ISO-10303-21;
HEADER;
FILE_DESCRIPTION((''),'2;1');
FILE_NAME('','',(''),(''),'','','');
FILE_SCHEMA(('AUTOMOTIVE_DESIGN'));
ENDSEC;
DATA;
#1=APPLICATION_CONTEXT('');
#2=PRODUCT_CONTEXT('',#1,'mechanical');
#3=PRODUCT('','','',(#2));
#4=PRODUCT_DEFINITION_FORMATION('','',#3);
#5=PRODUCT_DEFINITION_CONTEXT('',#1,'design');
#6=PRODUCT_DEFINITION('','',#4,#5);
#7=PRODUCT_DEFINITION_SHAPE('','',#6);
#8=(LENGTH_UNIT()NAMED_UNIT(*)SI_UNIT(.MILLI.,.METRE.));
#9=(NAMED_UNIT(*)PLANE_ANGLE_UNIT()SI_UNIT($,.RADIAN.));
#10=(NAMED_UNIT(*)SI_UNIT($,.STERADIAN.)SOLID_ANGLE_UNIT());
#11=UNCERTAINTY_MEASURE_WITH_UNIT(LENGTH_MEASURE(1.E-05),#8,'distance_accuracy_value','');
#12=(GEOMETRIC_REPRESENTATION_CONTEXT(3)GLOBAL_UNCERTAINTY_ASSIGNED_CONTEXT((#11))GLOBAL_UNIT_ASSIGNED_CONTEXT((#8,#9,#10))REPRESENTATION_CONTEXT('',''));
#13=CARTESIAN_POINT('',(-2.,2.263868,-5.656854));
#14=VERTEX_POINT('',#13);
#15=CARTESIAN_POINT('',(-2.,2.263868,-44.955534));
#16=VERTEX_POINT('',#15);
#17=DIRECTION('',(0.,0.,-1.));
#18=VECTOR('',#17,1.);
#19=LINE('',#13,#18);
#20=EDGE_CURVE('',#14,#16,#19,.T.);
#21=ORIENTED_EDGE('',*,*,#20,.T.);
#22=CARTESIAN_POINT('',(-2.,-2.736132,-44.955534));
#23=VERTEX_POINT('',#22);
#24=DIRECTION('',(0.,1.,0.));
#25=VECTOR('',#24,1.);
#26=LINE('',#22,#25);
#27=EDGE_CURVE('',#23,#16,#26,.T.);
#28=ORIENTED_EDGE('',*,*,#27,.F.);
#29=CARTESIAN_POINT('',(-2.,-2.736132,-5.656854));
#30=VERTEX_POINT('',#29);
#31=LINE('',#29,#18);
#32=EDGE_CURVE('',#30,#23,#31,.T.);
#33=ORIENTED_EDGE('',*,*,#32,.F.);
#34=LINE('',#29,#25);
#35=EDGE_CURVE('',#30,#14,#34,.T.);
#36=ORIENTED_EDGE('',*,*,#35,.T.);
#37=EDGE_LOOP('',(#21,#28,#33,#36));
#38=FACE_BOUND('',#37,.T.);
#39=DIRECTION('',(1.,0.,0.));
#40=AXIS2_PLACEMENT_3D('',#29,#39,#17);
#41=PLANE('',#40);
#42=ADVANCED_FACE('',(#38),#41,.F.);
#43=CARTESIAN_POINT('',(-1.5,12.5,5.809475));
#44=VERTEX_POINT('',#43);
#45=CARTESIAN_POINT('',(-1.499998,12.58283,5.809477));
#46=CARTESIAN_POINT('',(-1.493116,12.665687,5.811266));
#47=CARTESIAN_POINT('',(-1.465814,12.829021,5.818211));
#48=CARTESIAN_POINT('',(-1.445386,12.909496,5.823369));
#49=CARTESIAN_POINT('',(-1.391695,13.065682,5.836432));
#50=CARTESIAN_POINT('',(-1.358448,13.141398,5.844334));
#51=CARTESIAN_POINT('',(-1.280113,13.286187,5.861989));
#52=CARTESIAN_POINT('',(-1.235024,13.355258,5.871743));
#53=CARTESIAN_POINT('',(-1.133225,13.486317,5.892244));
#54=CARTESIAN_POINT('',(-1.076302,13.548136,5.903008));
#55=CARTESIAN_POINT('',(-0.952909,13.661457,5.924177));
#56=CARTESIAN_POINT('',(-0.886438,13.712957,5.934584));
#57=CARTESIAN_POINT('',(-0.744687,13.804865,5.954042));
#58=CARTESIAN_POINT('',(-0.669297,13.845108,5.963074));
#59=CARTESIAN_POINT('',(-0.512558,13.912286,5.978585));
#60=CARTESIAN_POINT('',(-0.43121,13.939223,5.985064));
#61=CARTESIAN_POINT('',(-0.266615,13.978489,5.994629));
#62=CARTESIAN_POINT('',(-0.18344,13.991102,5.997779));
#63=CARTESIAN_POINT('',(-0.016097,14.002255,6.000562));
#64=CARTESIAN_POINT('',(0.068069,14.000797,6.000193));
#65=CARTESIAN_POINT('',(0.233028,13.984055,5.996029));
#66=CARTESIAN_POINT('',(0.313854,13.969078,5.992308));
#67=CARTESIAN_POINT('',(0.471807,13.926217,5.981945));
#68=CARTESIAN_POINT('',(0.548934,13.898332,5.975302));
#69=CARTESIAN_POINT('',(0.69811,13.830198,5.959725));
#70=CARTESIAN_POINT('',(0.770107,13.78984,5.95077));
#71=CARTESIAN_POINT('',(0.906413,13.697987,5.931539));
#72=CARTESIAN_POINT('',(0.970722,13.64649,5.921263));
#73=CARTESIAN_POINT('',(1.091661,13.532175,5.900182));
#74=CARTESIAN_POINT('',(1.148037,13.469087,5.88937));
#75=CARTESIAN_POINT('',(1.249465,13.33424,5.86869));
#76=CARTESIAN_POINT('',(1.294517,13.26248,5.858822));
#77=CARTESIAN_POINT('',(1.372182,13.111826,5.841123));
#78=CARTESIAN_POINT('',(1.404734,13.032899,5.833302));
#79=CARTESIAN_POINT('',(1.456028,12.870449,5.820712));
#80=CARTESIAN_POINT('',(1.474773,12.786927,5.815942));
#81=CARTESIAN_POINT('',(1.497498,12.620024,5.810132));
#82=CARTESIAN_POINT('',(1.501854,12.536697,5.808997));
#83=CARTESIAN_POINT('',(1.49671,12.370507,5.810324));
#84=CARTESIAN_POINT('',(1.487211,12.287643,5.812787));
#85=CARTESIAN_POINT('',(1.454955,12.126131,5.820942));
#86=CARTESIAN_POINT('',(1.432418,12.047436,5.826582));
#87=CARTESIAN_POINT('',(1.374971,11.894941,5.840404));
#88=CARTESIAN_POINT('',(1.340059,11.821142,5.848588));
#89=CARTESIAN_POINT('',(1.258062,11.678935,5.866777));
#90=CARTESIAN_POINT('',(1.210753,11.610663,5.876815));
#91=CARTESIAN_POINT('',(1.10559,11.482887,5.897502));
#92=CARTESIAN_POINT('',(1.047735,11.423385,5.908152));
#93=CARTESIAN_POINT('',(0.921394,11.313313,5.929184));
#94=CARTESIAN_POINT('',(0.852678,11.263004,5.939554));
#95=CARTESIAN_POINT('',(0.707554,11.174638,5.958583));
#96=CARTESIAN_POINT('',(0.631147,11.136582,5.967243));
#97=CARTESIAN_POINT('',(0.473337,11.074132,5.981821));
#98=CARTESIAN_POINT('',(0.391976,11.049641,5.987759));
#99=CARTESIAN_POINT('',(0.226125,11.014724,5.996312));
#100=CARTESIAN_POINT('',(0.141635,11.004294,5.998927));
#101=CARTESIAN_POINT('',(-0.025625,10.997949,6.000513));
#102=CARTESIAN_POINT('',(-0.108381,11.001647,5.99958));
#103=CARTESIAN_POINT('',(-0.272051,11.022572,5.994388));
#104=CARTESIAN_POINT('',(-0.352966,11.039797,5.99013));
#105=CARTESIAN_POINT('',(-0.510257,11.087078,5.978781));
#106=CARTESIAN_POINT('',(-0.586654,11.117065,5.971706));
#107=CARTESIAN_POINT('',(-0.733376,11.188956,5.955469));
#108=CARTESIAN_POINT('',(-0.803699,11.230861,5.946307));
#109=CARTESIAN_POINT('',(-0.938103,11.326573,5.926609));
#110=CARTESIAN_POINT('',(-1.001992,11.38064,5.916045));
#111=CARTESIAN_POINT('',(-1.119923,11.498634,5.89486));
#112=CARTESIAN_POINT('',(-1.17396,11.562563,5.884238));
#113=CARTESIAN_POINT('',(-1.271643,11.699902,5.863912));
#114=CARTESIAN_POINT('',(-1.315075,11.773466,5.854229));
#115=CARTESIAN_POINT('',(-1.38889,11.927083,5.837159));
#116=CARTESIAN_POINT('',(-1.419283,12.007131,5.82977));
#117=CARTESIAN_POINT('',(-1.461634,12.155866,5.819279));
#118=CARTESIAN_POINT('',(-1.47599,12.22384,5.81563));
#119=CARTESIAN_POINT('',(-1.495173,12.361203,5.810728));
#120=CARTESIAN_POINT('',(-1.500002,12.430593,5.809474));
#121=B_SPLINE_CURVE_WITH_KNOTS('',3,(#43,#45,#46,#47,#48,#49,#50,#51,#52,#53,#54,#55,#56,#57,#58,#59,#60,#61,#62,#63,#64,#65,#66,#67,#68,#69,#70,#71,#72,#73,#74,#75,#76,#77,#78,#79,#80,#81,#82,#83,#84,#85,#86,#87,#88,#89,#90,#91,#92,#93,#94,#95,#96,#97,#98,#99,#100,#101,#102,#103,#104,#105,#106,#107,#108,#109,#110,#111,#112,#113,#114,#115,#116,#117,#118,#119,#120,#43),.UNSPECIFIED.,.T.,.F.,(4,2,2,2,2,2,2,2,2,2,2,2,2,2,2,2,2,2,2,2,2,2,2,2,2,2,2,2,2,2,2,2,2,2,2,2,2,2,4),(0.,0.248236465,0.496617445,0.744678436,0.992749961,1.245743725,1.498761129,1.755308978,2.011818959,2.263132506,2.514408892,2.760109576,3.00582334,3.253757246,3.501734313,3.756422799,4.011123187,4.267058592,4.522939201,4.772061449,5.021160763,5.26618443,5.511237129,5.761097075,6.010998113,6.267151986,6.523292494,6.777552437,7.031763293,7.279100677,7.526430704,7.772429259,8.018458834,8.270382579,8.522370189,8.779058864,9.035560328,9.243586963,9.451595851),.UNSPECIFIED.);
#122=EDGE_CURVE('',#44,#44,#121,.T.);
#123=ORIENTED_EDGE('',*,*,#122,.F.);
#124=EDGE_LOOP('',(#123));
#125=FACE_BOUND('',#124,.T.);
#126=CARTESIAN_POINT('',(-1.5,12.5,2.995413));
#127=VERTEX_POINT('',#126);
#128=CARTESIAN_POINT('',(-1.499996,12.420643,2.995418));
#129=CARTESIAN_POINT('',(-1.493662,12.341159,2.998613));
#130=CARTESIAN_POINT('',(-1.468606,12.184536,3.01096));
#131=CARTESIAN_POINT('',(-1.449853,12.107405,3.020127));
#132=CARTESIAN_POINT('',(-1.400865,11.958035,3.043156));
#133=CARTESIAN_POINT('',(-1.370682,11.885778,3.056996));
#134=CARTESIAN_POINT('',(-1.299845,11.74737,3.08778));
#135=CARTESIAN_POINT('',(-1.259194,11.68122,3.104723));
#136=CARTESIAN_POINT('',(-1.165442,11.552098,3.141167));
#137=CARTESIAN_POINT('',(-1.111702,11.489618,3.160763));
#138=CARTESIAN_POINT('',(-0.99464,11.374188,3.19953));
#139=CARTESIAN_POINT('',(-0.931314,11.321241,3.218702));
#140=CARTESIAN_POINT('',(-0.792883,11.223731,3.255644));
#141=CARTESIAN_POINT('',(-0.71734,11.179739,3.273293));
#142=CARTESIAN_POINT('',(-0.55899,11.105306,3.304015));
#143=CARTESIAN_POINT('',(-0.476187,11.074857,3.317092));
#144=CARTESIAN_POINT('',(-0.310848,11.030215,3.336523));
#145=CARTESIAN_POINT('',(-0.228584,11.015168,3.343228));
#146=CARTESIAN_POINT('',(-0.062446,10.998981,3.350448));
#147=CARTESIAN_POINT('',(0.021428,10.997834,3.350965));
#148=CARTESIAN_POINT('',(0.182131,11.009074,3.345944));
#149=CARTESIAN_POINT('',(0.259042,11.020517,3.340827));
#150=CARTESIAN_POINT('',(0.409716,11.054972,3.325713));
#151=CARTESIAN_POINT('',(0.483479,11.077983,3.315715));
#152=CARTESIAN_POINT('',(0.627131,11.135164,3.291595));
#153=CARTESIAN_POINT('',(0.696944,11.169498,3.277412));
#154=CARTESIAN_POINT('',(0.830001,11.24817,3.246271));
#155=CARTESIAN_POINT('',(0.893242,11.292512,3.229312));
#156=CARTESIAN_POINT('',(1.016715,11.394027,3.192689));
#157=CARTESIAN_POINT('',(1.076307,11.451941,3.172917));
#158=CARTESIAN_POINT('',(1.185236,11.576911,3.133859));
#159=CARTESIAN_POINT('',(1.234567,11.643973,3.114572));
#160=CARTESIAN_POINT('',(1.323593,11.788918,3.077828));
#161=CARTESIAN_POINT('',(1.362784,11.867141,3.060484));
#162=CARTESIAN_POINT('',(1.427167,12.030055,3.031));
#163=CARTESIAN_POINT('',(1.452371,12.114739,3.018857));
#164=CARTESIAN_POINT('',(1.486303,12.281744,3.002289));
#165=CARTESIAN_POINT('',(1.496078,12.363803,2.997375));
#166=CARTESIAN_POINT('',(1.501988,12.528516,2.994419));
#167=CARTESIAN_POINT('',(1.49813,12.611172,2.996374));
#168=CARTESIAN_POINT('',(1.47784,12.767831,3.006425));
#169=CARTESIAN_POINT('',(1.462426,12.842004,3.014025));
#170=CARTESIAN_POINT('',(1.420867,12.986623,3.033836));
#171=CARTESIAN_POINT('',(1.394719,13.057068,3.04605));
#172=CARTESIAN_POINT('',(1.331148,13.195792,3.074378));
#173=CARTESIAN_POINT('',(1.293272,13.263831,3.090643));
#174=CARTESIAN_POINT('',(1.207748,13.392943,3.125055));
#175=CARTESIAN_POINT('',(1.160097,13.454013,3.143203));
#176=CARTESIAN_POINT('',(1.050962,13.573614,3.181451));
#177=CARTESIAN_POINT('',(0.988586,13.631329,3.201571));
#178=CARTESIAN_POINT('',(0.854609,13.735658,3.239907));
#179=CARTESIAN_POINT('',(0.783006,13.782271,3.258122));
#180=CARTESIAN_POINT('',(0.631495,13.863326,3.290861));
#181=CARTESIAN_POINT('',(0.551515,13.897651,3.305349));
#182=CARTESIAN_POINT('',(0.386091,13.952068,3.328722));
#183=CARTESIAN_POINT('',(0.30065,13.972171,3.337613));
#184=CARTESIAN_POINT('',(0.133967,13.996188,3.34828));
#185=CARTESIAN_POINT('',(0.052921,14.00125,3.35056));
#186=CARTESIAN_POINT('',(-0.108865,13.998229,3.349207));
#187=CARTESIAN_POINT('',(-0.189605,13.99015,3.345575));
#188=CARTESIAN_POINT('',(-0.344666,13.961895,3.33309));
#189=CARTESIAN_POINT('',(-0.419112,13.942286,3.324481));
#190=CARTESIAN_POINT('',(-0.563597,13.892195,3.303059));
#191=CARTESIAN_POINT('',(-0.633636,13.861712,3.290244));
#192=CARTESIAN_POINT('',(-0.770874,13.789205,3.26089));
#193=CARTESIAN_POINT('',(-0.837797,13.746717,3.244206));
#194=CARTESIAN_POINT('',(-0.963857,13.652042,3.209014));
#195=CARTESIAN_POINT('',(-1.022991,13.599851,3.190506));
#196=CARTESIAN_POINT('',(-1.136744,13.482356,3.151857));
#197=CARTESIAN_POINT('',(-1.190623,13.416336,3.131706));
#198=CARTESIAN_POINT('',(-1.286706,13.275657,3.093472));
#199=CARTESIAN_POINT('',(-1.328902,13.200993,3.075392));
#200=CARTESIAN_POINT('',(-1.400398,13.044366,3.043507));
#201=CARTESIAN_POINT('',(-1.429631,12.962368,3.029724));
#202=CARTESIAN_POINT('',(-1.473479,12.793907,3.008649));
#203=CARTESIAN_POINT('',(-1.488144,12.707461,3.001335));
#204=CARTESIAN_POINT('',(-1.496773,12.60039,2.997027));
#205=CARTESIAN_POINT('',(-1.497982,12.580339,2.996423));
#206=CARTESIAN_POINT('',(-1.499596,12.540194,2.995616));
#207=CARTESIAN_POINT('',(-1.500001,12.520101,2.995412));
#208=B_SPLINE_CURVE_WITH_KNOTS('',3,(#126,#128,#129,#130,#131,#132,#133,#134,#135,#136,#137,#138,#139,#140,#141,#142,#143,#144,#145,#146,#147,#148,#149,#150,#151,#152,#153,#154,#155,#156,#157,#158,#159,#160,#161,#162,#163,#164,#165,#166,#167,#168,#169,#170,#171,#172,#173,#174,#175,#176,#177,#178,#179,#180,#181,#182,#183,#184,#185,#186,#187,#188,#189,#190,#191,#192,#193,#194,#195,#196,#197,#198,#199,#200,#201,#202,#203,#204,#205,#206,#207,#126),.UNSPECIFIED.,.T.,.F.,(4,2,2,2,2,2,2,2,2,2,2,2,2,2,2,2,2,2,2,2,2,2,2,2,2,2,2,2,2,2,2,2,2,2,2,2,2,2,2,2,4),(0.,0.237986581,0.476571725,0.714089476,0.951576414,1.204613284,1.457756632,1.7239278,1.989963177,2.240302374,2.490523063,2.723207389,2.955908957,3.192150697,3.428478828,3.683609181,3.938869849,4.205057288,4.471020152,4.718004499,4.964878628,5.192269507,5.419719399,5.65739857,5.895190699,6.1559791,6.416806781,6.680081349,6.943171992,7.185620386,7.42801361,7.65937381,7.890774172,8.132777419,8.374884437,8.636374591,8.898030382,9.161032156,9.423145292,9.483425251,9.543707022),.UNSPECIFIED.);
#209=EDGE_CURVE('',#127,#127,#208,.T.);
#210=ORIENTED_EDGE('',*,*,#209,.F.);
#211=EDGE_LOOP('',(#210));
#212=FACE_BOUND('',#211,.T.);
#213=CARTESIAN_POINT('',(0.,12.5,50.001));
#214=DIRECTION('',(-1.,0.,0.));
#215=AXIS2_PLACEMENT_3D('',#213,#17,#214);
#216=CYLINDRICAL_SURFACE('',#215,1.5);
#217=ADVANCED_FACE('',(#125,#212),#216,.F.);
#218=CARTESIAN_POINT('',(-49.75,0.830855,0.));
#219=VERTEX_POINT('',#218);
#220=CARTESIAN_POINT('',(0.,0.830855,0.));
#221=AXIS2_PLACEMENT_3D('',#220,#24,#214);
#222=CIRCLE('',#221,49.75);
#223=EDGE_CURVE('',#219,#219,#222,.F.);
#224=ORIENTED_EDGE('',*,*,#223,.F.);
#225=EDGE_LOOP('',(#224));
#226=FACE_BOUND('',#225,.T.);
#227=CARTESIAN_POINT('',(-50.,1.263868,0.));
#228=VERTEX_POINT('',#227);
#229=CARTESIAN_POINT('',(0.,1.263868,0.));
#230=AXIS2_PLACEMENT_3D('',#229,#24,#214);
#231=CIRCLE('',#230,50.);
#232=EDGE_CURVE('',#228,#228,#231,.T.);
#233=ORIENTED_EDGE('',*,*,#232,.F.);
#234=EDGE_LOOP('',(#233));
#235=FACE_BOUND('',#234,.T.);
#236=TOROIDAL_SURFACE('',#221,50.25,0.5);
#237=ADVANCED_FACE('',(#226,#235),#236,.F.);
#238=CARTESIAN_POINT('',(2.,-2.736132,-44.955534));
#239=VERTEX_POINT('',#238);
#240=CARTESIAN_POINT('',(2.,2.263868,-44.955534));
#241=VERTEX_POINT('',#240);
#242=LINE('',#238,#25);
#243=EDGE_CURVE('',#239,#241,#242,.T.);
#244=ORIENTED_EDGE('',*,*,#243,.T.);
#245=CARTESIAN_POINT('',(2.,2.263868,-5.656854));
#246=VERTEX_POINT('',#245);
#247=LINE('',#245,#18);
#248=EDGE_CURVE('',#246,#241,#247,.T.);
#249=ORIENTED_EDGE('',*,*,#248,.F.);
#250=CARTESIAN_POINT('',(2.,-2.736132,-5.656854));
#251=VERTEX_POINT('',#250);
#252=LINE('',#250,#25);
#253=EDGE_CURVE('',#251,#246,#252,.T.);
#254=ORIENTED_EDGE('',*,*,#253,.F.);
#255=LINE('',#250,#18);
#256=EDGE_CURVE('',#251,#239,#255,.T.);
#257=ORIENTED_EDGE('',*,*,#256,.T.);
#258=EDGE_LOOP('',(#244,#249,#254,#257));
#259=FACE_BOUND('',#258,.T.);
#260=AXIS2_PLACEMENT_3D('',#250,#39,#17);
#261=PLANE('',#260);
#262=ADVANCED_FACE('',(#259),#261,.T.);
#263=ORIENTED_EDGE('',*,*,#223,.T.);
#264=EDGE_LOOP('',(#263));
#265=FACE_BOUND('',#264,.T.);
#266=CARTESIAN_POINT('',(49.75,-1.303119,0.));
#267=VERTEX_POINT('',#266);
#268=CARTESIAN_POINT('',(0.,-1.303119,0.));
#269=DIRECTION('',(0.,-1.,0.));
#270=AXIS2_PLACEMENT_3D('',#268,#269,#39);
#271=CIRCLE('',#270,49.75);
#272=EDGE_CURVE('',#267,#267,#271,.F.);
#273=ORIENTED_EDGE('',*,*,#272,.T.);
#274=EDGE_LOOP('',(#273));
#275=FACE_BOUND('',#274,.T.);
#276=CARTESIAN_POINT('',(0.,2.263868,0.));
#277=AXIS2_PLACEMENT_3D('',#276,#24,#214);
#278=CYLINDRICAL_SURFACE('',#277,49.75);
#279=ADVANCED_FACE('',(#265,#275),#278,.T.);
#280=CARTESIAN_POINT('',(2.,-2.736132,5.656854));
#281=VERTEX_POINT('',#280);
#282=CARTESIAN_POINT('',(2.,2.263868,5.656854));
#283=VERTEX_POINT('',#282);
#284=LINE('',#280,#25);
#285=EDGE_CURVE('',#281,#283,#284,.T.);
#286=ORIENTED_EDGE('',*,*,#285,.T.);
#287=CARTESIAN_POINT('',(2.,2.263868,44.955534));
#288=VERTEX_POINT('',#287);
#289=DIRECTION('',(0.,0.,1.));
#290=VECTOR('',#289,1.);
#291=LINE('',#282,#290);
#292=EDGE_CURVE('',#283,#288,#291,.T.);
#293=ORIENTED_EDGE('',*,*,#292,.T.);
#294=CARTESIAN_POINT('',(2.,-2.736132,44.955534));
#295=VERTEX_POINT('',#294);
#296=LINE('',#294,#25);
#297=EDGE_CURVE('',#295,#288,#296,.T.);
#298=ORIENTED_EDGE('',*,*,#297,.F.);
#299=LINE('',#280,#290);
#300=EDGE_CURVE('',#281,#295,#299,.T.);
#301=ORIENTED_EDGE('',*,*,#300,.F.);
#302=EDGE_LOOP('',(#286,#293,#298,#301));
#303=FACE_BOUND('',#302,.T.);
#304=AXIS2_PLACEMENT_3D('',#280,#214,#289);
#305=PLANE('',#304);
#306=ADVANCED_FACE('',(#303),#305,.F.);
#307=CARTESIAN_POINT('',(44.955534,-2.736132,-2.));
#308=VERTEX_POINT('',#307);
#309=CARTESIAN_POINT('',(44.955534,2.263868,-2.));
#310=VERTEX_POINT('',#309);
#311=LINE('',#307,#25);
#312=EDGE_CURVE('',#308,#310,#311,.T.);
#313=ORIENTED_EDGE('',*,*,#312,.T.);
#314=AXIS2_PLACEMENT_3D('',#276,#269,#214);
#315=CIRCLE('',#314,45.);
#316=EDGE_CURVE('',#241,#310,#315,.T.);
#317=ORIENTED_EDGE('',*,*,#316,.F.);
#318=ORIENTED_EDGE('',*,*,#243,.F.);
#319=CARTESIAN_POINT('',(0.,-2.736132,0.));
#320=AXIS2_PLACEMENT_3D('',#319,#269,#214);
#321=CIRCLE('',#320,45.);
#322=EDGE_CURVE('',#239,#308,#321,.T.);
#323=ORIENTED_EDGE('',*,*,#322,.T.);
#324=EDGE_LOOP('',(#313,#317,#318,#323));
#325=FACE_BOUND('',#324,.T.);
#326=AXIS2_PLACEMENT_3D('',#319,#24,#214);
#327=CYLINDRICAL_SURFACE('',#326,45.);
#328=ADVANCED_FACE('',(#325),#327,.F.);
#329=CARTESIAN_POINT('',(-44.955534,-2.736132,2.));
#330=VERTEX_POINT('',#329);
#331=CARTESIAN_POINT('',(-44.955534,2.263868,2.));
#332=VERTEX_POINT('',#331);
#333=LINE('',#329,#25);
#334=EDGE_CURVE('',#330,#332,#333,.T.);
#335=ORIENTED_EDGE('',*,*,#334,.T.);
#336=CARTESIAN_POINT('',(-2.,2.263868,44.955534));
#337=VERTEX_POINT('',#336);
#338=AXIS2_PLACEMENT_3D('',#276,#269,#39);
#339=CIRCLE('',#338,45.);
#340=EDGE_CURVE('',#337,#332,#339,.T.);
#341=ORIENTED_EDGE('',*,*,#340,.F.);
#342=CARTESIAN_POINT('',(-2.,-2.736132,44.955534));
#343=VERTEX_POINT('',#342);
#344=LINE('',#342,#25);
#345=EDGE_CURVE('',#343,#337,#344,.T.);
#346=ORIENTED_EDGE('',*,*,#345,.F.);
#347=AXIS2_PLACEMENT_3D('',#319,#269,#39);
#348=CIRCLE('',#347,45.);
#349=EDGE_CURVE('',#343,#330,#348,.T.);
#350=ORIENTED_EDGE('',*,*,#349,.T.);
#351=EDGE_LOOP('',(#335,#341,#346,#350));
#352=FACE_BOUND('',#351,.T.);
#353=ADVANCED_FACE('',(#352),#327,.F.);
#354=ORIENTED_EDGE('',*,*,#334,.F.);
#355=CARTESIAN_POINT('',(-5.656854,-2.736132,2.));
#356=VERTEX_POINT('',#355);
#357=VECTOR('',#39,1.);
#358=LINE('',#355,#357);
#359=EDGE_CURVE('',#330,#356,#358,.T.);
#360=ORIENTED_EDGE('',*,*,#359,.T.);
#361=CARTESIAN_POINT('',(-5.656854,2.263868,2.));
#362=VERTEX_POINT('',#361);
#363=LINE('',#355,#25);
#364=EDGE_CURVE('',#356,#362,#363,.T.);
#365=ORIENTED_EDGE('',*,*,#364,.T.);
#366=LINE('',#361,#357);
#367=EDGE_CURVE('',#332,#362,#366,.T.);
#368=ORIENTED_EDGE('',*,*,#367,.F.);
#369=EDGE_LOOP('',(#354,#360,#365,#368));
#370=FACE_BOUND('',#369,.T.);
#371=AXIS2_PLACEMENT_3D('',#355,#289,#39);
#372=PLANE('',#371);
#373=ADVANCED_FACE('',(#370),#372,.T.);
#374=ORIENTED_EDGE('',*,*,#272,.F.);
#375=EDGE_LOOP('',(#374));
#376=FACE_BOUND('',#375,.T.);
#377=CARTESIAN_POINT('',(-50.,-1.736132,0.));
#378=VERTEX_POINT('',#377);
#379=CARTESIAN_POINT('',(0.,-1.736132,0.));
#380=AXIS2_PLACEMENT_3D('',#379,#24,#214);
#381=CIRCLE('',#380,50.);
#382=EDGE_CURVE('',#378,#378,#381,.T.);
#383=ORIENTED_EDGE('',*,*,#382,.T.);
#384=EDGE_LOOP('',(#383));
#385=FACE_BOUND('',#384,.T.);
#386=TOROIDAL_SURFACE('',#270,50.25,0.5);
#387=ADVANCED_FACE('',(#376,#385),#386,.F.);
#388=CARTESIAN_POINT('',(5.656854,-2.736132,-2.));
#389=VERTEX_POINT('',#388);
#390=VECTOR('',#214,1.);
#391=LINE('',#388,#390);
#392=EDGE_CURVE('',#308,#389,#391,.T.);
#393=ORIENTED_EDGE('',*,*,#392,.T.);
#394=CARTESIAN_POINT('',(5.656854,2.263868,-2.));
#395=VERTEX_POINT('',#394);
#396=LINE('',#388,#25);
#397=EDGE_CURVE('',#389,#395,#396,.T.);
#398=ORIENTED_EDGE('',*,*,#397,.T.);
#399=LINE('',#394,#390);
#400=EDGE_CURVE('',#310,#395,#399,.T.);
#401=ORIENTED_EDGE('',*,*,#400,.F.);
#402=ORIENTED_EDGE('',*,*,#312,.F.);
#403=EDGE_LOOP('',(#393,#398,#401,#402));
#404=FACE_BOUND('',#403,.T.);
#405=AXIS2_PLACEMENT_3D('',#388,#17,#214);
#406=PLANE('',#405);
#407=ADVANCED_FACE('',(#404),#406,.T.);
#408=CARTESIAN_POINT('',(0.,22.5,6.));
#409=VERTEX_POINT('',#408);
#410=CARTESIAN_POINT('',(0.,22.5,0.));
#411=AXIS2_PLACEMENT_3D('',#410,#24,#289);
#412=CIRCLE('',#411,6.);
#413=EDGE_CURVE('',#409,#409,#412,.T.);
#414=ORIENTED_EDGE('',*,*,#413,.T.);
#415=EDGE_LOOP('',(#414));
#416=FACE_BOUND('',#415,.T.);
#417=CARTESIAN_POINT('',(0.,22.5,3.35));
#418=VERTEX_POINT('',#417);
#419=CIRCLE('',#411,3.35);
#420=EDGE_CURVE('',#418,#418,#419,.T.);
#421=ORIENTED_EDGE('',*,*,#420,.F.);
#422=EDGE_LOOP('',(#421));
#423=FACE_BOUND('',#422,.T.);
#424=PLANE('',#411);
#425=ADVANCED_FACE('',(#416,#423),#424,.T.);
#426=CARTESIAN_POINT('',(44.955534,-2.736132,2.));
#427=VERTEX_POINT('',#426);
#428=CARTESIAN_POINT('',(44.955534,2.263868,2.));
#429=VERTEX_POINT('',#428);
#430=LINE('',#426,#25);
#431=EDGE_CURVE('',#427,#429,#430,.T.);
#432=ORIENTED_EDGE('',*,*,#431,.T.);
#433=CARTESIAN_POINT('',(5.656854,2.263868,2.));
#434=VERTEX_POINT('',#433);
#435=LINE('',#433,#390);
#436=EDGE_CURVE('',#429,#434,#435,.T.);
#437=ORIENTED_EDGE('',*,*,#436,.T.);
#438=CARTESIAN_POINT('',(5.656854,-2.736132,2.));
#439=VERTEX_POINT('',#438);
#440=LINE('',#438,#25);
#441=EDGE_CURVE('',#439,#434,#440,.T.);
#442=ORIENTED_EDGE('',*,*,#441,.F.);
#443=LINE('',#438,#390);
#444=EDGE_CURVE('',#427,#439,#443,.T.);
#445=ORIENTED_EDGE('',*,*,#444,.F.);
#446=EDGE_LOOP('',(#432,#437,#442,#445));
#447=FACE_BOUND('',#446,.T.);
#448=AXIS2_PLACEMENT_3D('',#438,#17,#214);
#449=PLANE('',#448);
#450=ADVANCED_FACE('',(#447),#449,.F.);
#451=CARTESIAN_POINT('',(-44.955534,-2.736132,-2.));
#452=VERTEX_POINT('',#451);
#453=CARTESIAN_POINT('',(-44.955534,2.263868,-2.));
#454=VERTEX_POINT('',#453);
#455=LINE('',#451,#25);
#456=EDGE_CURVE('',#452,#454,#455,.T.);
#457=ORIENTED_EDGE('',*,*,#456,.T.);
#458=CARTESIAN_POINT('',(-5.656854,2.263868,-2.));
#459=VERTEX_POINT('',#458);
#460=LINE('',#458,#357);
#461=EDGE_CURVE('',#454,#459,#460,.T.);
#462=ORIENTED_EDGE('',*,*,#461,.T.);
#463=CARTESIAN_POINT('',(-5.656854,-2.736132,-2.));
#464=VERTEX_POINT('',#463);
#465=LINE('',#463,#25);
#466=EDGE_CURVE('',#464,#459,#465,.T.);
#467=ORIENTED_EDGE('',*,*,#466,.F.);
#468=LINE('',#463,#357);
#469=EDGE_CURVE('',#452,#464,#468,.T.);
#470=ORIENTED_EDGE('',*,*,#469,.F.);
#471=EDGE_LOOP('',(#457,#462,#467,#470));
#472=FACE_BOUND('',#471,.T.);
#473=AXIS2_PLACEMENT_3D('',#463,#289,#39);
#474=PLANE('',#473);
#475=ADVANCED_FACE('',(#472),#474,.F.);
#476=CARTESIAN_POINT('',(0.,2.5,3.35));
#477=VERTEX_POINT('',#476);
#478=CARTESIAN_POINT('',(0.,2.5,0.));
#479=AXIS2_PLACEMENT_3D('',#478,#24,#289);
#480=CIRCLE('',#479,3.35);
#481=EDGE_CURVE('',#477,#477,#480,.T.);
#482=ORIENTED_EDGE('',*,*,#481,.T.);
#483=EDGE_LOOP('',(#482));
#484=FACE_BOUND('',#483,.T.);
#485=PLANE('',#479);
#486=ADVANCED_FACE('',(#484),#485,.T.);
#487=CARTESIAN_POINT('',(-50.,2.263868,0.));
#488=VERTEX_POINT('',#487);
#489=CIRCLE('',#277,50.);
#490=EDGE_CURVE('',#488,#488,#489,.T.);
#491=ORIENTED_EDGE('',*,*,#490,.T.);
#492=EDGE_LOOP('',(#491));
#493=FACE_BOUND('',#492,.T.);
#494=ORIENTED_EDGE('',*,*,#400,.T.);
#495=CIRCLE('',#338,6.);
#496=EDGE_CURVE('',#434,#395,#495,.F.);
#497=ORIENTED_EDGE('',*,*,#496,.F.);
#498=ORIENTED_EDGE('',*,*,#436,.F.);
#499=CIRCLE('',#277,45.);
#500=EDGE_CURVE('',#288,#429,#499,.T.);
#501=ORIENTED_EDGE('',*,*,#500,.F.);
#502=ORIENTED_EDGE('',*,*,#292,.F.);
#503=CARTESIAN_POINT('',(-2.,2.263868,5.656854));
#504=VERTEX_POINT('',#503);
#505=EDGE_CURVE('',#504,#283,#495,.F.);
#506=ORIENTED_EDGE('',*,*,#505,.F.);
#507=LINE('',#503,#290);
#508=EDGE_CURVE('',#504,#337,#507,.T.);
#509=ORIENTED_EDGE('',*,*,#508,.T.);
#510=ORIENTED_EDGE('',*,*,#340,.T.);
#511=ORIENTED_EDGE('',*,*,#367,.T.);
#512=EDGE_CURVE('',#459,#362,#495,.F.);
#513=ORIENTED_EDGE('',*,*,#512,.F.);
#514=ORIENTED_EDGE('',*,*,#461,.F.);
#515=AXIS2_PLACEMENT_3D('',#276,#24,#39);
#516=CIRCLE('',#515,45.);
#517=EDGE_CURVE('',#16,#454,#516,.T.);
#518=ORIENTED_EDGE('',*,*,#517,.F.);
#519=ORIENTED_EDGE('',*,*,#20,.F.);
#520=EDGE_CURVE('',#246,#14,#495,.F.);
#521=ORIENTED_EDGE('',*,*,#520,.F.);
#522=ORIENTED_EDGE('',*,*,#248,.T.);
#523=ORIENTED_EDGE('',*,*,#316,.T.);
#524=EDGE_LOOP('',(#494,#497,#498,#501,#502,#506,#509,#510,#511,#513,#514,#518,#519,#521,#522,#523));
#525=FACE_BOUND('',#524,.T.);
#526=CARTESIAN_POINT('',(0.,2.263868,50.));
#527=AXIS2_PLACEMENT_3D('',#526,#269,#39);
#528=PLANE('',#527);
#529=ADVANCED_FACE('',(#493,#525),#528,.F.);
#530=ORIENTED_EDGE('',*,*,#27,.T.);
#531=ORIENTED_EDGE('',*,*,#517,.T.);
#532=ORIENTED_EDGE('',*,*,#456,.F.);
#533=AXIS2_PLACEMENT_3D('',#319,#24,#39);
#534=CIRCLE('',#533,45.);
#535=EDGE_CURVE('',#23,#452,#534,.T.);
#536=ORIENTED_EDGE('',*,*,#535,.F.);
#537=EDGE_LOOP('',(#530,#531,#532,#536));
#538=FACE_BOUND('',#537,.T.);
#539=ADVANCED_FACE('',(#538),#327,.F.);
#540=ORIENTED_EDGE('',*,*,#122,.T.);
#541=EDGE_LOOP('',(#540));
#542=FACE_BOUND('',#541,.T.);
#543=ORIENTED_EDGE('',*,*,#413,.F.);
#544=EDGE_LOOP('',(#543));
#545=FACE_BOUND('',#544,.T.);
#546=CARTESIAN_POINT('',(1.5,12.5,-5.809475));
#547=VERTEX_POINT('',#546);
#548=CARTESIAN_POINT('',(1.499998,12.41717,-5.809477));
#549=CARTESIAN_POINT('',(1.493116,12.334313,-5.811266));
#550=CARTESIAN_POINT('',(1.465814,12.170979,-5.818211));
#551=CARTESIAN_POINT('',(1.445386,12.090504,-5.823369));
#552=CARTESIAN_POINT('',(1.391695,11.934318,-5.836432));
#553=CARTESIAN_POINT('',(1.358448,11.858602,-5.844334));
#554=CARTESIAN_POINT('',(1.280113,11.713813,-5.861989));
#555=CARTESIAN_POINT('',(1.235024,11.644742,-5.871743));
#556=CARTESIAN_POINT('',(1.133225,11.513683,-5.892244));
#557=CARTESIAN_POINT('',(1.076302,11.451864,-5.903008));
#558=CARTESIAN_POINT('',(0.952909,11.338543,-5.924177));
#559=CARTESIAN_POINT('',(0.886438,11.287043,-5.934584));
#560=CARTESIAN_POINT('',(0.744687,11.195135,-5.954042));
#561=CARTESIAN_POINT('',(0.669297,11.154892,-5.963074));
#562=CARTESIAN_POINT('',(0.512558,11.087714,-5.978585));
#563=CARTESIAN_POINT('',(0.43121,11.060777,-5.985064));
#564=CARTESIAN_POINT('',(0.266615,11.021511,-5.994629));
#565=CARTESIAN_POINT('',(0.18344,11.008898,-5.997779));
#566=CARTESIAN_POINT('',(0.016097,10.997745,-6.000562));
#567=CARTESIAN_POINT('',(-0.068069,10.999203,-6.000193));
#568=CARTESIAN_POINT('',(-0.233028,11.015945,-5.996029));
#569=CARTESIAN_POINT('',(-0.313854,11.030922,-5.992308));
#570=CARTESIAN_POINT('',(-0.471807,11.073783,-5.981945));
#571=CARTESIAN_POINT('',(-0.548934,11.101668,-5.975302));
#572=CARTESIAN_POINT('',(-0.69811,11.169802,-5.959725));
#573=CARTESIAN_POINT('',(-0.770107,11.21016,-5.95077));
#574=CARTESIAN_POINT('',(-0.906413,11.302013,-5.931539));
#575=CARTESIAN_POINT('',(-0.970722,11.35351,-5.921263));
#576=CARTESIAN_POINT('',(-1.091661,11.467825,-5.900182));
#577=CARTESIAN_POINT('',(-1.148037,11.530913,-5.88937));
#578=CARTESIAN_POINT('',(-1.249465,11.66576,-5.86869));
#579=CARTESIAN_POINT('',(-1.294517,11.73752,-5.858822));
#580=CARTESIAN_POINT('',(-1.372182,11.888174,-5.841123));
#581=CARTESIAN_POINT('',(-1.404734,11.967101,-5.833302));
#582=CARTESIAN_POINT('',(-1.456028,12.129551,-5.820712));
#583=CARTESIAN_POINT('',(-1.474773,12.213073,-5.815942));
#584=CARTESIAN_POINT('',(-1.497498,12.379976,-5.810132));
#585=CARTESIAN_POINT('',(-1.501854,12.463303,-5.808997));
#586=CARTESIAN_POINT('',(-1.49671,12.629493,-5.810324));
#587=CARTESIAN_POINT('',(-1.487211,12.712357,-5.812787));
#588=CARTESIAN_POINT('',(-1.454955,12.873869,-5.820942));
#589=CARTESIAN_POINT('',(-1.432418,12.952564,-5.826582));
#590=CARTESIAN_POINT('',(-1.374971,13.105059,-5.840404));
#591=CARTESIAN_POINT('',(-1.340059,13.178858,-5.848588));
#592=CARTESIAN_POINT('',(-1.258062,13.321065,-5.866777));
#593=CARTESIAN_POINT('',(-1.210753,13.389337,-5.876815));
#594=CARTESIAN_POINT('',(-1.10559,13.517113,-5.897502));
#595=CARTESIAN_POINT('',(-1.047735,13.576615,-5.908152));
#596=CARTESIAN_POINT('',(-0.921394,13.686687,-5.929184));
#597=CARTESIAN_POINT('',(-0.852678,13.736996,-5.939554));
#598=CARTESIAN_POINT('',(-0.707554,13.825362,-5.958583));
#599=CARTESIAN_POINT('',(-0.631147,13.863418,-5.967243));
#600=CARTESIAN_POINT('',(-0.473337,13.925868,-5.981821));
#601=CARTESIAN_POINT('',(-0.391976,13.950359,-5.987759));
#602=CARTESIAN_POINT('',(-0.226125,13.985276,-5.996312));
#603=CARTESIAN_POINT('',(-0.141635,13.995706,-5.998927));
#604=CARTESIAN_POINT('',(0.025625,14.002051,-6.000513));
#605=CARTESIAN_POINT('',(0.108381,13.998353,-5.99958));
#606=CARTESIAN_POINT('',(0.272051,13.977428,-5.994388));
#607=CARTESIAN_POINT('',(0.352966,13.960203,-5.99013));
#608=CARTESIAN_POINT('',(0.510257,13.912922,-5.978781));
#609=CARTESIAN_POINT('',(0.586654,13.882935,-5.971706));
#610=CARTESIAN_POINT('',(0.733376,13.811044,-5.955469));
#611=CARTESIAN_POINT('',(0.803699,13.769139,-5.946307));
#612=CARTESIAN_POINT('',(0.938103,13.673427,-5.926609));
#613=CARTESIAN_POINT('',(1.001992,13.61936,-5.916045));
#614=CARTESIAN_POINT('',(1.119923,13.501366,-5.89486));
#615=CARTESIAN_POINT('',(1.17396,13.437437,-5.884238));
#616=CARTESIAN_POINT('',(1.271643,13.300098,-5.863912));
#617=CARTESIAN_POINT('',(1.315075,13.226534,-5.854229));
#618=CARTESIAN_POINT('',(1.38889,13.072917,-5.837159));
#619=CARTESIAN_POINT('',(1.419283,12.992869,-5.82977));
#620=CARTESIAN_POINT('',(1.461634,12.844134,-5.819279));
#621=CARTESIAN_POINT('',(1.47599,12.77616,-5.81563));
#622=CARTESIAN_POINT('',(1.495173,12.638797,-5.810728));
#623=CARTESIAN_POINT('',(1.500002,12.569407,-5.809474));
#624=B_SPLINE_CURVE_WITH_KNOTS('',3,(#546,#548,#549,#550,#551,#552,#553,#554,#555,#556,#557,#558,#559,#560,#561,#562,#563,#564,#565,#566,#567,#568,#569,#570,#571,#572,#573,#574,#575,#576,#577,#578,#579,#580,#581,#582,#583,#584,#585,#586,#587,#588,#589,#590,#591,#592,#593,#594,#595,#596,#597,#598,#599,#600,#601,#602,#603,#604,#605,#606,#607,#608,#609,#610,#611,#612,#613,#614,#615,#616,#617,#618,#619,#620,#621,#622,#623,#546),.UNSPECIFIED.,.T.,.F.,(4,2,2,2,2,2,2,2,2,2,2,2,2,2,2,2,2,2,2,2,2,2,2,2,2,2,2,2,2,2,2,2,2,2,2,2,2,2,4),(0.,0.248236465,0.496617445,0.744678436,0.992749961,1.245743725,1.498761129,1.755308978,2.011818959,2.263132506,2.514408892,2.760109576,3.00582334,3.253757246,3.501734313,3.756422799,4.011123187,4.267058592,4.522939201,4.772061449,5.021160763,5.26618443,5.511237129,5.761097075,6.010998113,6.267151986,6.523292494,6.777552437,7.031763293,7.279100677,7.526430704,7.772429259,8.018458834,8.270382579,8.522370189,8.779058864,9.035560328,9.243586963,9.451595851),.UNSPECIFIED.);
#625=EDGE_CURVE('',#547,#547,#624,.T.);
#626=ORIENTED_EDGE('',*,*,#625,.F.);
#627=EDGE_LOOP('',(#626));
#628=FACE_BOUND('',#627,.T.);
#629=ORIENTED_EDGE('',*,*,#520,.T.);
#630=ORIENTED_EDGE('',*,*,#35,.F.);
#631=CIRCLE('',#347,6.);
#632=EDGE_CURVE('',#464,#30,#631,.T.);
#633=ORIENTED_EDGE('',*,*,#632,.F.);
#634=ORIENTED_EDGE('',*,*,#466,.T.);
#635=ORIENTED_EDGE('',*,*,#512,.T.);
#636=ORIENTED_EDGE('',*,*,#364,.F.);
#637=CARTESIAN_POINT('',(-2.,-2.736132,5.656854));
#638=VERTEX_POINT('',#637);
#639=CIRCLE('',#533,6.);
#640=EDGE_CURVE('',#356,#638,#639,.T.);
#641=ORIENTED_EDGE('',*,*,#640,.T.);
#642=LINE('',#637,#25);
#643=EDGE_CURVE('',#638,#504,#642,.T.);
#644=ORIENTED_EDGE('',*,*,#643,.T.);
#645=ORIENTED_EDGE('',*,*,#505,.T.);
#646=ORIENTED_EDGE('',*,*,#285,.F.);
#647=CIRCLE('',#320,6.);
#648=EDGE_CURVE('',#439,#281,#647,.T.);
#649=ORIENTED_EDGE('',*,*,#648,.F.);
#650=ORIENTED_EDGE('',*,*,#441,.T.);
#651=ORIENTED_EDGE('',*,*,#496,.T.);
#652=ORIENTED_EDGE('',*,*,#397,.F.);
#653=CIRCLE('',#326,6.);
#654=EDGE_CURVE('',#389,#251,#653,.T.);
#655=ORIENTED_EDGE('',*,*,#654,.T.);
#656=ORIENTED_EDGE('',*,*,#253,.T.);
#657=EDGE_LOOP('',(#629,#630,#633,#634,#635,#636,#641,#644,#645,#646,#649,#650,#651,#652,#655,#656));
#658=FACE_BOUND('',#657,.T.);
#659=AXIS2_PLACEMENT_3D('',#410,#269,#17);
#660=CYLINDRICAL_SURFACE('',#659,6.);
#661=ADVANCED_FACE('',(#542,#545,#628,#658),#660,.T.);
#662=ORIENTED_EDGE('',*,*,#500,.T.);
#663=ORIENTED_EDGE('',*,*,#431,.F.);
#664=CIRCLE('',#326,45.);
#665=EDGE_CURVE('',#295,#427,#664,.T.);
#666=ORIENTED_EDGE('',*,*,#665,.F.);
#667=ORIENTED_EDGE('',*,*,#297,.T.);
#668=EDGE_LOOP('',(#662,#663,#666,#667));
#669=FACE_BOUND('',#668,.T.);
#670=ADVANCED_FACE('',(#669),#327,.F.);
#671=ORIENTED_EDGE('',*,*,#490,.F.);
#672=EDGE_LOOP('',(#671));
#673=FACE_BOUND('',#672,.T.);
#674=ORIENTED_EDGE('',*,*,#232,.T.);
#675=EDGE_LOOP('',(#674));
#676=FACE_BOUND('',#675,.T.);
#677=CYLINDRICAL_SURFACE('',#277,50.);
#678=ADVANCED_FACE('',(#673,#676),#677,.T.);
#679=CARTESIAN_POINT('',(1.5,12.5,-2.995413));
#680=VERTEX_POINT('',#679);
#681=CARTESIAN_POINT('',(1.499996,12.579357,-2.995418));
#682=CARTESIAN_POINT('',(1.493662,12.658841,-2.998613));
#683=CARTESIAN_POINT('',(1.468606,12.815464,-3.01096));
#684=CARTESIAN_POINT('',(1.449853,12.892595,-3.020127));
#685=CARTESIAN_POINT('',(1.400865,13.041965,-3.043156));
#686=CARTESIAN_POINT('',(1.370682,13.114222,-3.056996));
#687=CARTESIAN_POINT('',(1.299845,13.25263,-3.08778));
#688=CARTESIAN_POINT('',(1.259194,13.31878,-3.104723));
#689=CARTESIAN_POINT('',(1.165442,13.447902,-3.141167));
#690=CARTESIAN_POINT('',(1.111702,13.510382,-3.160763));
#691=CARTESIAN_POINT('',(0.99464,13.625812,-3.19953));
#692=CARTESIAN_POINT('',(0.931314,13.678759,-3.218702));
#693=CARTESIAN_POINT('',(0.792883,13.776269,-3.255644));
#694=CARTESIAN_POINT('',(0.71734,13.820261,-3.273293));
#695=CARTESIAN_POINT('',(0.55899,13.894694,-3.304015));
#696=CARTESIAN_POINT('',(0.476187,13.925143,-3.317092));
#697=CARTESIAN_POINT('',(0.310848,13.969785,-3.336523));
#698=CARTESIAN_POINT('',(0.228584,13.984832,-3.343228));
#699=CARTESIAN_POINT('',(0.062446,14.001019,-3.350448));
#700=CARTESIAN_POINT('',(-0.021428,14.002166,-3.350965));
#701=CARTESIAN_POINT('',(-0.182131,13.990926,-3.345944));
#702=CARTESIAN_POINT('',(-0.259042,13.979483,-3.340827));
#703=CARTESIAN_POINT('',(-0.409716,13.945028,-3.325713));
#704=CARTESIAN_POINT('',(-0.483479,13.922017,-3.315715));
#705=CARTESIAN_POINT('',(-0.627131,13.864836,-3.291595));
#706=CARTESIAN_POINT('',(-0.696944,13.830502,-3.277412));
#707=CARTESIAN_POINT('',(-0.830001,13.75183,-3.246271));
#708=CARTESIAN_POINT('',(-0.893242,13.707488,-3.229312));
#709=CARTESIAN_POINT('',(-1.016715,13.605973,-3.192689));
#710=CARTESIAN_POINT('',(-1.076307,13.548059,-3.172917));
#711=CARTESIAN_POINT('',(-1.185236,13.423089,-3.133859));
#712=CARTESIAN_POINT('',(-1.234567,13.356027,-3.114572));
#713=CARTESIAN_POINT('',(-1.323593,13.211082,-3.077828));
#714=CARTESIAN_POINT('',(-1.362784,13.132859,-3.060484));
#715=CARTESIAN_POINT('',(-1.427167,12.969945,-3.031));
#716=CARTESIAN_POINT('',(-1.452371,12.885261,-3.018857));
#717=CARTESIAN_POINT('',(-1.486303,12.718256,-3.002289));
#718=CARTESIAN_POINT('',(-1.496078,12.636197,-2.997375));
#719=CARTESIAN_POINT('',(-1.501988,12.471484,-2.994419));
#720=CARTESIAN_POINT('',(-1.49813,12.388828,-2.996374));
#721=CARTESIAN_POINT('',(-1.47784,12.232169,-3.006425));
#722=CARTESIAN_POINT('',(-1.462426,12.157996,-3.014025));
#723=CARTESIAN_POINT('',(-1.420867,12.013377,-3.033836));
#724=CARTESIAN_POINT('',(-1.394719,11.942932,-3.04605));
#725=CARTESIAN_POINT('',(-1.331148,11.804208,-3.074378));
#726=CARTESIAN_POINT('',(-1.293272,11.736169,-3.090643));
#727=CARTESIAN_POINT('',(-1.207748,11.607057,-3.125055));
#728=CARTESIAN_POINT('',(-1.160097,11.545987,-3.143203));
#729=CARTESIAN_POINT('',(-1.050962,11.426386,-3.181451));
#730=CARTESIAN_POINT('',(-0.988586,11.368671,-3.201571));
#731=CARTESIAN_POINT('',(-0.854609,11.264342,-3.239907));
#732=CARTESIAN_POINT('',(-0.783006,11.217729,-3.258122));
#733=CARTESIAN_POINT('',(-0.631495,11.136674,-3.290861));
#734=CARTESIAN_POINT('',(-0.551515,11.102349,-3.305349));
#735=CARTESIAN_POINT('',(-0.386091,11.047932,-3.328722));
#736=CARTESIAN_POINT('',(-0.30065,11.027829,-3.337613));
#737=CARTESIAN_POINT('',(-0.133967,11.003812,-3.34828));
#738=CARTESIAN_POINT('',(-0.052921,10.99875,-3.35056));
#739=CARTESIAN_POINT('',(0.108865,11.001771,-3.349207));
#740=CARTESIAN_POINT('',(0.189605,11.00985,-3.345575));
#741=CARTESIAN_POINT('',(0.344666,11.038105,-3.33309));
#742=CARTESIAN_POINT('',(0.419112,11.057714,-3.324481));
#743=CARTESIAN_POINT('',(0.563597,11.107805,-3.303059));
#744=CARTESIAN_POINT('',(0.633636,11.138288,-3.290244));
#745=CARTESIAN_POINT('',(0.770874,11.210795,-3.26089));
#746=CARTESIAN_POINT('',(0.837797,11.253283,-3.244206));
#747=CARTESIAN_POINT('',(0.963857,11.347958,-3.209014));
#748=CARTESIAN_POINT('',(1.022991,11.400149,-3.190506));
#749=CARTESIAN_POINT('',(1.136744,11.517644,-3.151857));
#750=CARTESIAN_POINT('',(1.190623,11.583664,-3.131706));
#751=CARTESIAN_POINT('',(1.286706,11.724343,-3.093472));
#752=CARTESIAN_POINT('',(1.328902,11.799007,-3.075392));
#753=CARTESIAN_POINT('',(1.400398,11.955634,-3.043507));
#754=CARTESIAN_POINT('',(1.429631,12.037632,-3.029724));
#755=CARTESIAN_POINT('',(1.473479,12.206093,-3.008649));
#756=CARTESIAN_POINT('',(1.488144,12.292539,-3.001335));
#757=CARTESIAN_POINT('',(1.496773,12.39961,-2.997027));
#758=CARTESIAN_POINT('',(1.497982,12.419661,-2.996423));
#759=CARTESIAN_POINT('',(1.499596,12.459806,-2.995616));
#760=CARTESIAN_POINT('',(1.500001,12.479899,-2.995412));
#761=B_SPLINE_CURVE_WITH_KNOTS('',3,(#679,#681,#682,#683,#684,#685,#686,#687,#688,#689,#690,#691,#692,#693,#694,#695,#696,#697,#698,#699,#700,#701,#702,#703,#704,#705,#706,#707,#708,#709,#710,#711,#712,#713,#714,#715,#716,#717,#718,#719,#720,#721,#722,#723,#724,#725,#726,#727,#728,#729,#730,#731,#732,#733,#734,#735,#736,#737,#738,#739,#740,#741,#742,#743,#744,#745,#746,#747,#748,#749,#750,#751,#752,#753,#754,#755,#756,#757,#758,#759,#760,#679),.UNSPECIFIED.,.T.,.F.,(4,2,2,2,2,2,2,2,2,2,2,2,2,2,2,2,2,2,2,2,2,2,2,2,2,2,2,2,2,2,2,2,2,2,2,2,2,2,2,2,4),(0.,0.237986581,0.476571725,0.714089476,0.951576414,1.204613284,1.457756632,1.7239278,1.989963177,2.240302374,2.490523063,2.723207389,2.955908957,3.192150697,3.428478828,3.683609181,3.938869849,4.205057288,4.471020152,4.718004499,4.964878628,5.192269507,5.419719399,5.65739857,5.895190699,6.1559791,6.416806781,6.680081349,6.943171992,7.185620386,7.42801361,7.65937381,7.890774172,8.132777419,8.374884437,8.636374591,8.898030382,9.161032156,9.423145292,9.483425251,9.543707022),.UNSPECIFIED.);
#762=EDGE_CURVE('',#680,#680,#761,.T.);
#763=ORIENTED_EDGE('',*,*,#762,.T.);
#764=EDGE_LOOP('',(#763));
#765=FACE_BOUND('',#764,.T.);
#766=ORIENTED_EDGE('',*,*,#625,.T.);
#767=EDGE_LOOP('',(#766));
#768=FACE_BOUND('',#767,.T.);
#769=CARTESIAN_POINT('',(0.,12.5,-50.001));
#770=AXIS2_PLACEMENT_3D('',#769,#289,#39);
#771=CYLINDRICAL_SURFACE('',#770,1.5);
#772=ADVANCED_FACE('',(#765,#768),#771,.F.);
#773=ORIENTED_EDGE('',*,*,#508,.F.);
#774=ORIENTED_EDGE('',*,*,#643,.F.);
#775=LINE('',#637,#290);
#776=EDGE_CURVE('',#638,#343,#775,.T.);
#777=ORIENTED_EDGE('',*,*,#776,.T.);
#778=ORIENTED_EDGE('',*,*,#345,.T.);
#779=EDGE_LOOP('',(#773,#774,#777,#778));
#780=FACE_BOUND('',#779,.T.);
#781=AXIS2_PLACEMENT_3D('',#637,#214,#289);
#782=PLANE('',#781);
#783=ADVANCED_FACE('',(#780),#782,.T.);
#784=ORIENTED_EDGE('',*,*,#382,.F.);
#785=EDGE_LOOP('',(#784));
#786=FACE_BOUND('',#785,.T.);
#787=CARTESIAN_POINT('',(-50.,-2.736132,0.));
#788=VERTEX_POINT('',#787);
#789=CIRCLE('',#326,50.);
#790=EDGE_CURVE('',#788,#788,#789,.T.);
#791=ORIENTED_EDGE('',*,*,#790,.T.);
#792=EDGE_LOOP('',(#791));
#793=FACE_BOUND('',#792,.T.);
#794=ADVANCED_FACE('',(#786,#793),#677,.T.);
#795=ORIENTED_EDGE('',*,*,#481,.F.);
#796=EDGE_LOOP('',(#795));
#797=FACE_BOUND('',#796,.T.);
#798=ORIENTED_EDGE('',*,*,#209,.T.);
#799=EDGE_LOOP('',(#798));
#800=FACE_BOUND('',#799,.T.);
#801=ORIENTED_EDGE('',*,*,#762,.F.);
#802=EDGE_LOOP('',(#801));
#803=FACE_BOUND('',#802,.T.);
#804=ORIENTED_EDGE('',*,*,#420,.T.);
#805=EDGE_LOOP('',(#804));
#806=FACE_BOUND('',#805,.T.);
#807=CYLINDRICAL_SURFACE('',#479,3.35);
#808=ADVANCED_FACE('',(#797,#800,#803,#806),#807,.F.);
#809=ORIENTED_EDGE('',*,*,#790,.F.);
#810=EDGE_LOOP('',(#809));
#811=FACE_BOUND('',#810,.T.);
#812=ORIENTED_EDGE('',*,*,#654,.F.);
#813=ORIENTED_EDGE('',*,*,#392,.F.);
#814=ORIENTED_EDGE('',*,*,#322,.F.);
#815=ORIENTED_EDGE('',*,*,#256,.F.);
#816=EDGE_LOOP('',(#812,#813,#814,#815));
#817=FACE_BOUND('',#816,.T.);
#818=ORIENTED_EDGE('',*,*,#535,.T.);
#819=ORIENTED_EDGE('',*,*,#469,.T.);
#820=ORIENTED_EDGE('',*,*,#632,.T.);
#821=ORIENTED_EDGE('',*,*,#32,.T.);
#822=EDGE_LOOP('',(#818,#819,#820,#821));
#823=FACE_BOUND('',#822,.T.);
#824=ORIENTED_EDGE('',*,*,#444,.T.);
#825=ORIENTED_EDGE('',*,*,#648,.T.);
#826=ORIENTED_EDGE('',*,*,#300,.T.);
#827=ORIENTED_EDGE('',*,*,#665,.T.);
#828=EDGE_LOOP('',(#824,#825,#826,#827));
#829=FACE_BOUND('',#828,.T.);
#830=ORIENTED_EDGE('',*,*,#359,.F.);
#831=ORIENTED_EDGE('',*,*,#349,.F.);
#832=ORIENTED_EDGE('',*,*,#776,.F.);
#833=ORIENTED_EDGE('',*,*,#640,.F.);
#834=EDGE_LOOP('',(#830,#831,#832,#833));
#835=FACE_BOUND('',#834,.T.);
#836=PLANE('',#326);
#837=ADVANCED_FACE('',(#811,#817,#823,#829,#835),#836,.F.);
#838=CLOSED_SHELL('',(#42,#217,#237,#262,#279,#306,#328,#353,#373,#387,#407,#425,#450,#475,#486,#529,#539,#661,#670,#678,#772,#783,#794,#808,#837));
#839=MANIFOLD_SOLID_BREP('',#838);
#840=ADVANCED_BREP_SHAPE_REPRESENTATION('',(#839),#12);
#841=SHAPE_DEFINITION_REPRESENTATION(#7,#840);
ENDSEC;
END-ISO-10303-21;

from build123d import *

# Parameters (mm, degrees)
REVOLVE1_ANGLE                 = 90
BOSS_EXTRUDE2_DEPTH            = 22.5
CUT_EXTRUDE1_DEPTH             = 74.549310272
MIRROR3_START                  = -2.736132077
MIRROR3_DEPTH                  = 5
MIRROR3_START_2                = 2.263867923
MIRROR3_2_DEPTH                = 20.236132077
MIRROR3_3_DEPTH                = 1
MIRROR3_START_3                = 1.263867923
MIRROR3_4_DEPTH                = 1
MIRROR4_START                  = -2.736132077
MIRROR4_DEPTH                  = 5
MIRROR4_START_2                = 2.263867923
MIRROR4_2_DEPTH                = 20.236132077
MIRROR4_3_DEPTH                = 1
MIRROR4_START_3                = 1.263867923
MIRROR4_4_DEPTH                = 1
SKETCH7_R                      = 3.35
CUT_EXTRUDE2_DEPTH             = 20
FILLET9_R                      = 0.5
CUT_EXTRUDE3_REACH             = 76.204
SKETCH8_R                      = 1.5
CUT_EXTRUDE3_DIRECTION_2_REACH = 76.204


# Read off the part's stored shape, not the designer's step: Mirror3, Mirror4
with BuildPart() as part:
    # Sketch1 → Revolve1 (revolve)
    with BuildSketch(Plane.XY):
        Polygon((0, 2.263867923), (0, -2.736132077), (50, -2.736132077), (50, -1.736132077), (49.75, -1.736132077), (49.75, 1.263867923), (50, 1.263867923), (50, 2.263867923), align=None)
    revolve(axis=Axis((0, 2.263867923, 0), (0, -1, 0)), revolution_arc=REVOLVE1_ANGLE)

    # Sketch2 → Boss-Extrude2 (add)
    with BuildSketch(Plane(origin=(0, 0, 0), x_dir=(1, 0, 0), z_dir=(0, 1, 0))):
        with BuildLine():
            Line((0, 0), (6, 0))
            ThreePointArc((6, 0), (4.242640687, -4.242640687), (0, -6))
            Line((0, -6), (0, 0))
        make_face()
    extrude(amount=BOSS_EXTRUDE2_DEPTH)

    # Sketch6 → Cut-Extrude1 (cut, through all)
    with BuildSketch(Plane(origin=(0, 2.263867923, 0), x_dir=(1, 0, 0), z_dir=(0, 1, 0))):
        with BuildLine():
            Line((2, -5.656854249), (2, -44.955533586))
            ThreePointArc((2, -44.955533586), (31.819805153, -31.819805153), (44.955533586, -2))
            Line((44.955533586, -2), (5.656854249, -2))
            ThreePointArc((5.656854249, -2), (4.242640687, -4.242640687), (2, -5.656854249))
        make_face()
    extrude(amount=-CUT_EXTRUDE1_DEPTH, mode=Mode.SUBTRACT)

    # Mirror3 outline → Mirror3 (add)
    with BuildSketch(Plane(origin=(0, 0, 0), x_dir=(1, 0, 0), z_dir=(0, 1, 0)).offset(MIRROR3_START)):
        with BuildLine():
            ThreePointArc((49.75, 0), (35.178562364, 35.178562364), (0, 49.75))
            Line((0, 49.75), (0, 0))
            Line((0, 0), (49.75, 0))
        make_face()
        with BuildLine():
            Line((44.955533586, 2), (5.656854249, 2))
            ThreePointArc((5.656854249, 2), (4.242640687, 4.242640687), (2, 5.656854249))
            Line((2, 5.656854249), (2, 44.955533586))
            ThreePointArc((2, 44.955533586), (31.819805153, 31.819805153), (44.955533586, 2))
        make_face(mode=Mode.SUBTRACT)
    extrude(amount=MIRROR3_DEPTH)

    # Mirror3 2 outline → Mirror3 2 (add)
    with BuildSketch(Plane(origin=(0, 0, 0), x_dir=(1, 0, 0), z_dir=(0, 1, 0)).offset(MIRROR3_START_2)):
        with BuildLine():
            Line((0, 0), (6, 0))
            ThreePointArc((6, 0), (4.242640687, 4.242640687), (0, 6))
            Line((0, 6), (0, 0))
        make_face()
    extrude(amount=MIRROR3_2_DEPTH)

    # Mirror3 3 outline → Mirror3 3 (add)
    with BuildSketch(Plane(origin=(0, 0, 0), x_dir=(1, 0, 0), z_dir=(0, 1, 0)).offset(MIRROR3_START)):
        with BuildLine():
            Line((49.75, 0), (50, 0))
            ThreePointArc((50, 0), (35.355339059, 35.355339059), (0, 50))
            Line((0, 50), (0, 49.75))
            ThreePointArc((0, 49.75), (35.178562364, 35.178562364), (49.75, 0))
        make_face()
    extrude(amount=MIRROR3_3_DEPTH)

    # Mirror3 4 outline → Mirror3 4 (add)
    with BuildSketch(Plane(origin=(0, 0, 0), x_dir=(1, 0, 0), z_dir=(0, 1, 0)).offset(MIRROR3_START_3)):
        with BuildLine():
            Line((49.75, 0), (50, 0))
            ThreePointArc((50, 0), (35.355339059, 35.355339059), (0, 50))
            Line((0, 50), (0, 49.75))
            ThreePointArc((0, 49.75), (35.178562364, 35.178562364), (49.75, 0))
        make_face()
    extrude(amount=MIRROR3_4_DEPTH)

    # Mirror4 outline → Mirror4 (add)
    with BuildSketch(Plane(origin=(0, 0, 0), x_dir=(1, 0, 0), z_dir=(0, 1, 0)).offset(MIRROR4_START)):
        with BuildLine():
            ThreePointArc((0, 49.75), (-49.75, 0), (0, -49.75))
            Line((0, -49.75), (0, 49.75))
        make_face()
        with BuildLine():
            Line((-2, 44.955533586), (-2, 5.656854249))
            ThreePointArc((-2, 5.656854249), (-4.242640687, 4.242640687), (-5.656854249, 2))
            Line((-5.656854249, 2), (-44.955533586, 2))
            ThreePointArc((-44.955533586, 2), (-31.819805153, 31.819805153), (-2, 44.955533586))
        make_face(mode=Mode.SUBTRACT)
        with BuildLine():
            Line((-44.955533586, -2), (-5.656854249, -2))
            ThreePointArc((-5.656854249, -2), (-4.242640687, -4.242640687), (-2, -5.656854249))
            Line((-2, -5.656854249), (-2, -44.955533586))
            ThreePointArc((-2, -44.955533586), (-31.819805153, -31.819805153), (-44.955533586, -2))
        make_face(mode=Mode.SUBTRACT)
    extrude(amount=MIRROR4_DEPTH)

    # Mirror4 2 outline → Mirror4 2 (add)
    with BuildSketch(Plane(origin=(0, 0, 0), x_dir=(1, 0, 0), z_dir=(0, 1, 0)).offset(MIRROR4_START_2)):
        with BuildLine():
            Line((0, -6), (0, 6))
            ThreePointArc((0, 6), (-6, 0), (0, -6))
        make_face()
    extrude(amount=MIRROR4_2_DEPTH)

    # Mirror4 3 outline → Mirror4 3 (add)
    with BuildSketch(Plane(origin=(0, 0, 0), x_dir=(1, 0, 0), z_dir=(0, 1, 0)).offset(MIRROR4_START)):
        with BuildLine():
            Line((0, 49.75), (0, 50))
            ThreePointArc((0, 50), (-50, 0), (0, -50))
            Line((0, -50), (0, -49.75))
            ThreePointArc((0, -49.75), (-49.75, 0), (0, 49.75))
        make_face()
    extrude(amount=MIRROR4_3_DEPTH)

    # Mirror4 4 outline → Mirror4 4 (add)
    with BuildSketch(Plane(origin=(0, 0, 0), x_dir=(1, 0, 0), z_dir=(0, 1, 0)).offset(MIRROR4_START_3)):
        with BuildLine():
            Line((0, 49.75), (0, 50))
            ThreePointArc((0, 50), (-50, 0), (0, -50))
            Line((0, -50), (0, -49.75))
            ThreePointArc((0, -49.75), (-49.75, 0), (0, 49.75))
        make_face()
    extrude(amount=MIRROR4_4_DEPTH)

    # Sketch7 → Cut-Extrude2 (cut)
    with BuildSketch(Plane(origin=(0, 22.5, 0), x_dir=(1, 0, 0), z_dir=(0, 1, 0))):
        with Locations(Location((0, 0, 0), (0, 0, 270))):
            Circle(SKETCH7_R)
    extrude(amount=-CUT_EXTRUDE2_DEPTH, mode=Mode.SUBTRACT)

    # Fillet9
    # the kernel refuses this fillet: 0.5 mm, written as the material it adds along each edge
    with BuildSketch(Plane(origin=(0, 1.263867923, 0), x_dir=(0, 0, 1), z_dir=(1, 0, 0))) as fillet9_piece_1:
        with BuildLine():
            CenterArc((50.25, 0.433012702), FILLET9_R, 180, 60)
            Line((50, 0), (49.995, -0.008660254))
            ThreePointArc((49.995, -0.008660254), (49.875, -0.01), (49.75, -0.01))
            Line((49.75, -0.01), (49.74, 0))
            Line((49.74, 0), (49.74, 0.433012702))
            Line((49.74, 0.433012702), (49.75, 0.433012702))
        make_face()
    revolve(axis=Axis((0, 1.263867923, 0), (0, -1, 0)), revolution_arc=180)
    with BuildSketch(Plane(origin=(0, -1.736132077, 0), x_dir=(0, 0, 1), z_dir=(1, 0, 0))) as fillet9_piece_2:
        with BuildLine():
            CenterArc((50.25, -0.433012702), FILLET9_R, 120, 60)
            Line((49.75, -0.433012702), (49.74, -0.433012702))
            Line((49.74, -0.433012702), (49.74, 0))
            Line((49.74, 0), (49.75, 0.01))
            ThreePointArc((49.75, 0.01), (49.875, 0.01), (49.995, 0.008660254))
            Line((49.995, 0.008660254), (50, 0))
        make_face()
    revolve(axis=Axis((0, -1.736132077, 0), (0, -1, 0)), revolution_arc=180)
    with BuildSketch(Plane(origin=(0, -1.736132077, 0), x_dir=(1, 0, 0), z_dir=(0, 0, -1))) as fillet9_piece_3:
        with BuildLine():
            CenterArc((50.25, -0.433012702), FILLET9_R, 120, 60)
            Line((49.75, -0.433012702), (49.74, -0.433012702))
            Line((49.74, -0.433012702), (49.74, 0))
            Line((49.74, 0), (49.75, 0.01))
            ThreePointArc((49.75, 0.01), (49.875, 0.01), (49.995, 0.008660254))
            Line((49.995, 0.008660254), (50, 0))
        make_face()
    revolve(axis=Axis((0, -1.736132077, 0), (0, -1, 0)), revolution_arc=90)
    with BuildSketch(Plane(origin=(0, -1.736132077, 0), x_dir=(2.109490694905436e-12, 0, -1.0), z_dir=(-1.0, 0, -2.109490694905436e-12))) as fillet9_piece_4:
        with BuildLine():
            CenterArc((50.25, -0.433012702), FILLET9_R, 120, 60)
            Line((49.75, -0.433012702), (49.74, -0.433012702))
            Line((49.74, -0.433012702), (49.74, 0))
            Line((49.74, 0), (49.75, 0.01))
            ThreePointArc((49.75, 0.01), (49.875, 0.01), (49.995, 0.008660254))
            Line((49.995, 0.008660254), (50, 0))
        make_face()
    revolve(axis=Axis((0, -1.736132077, 0), (0, -1, 0)), revolution_arc=90)
    with BuildSketch(Plane(origin=(0, 1.263867923, 0), x_dir=(1, 0, 0), z_dir=(0, 0, -1))) as fillet9_piece_5:
        with BuildLine():
            CenterArc((50.25, 0.433012702), FILLET9_R, 180, 60)
            Line((50, 0), (49.995, -0.008660254))
            ThreePointArc((49.995, -0.008660254), (49.875, -0.01), (49.75, -0.01))
            Line((49.75, -0.01), (49.74, 0))
            Line((49.74, 0), (49.74, 0.433012702))
            Line((49.74, 0.433012702), (49.75, 0.433012702))
        make_face()
    revolve(axis=Axis((0, 1.263867923, 0), (0, -1, 0)), revolution_arc=90)
    with BuildSketch(Plane(origin=(0, 1.263867923, 0), x_dir=(2.109490694905436e-12, 0, -1.0), z_dir=(-1.0, 0, -2.109490694905436e-12))) as fillet9_piece_6:
        with BuildLine():
            CenterArc((50.25, 0.433012702), FILLET9_R, 180, 60)
            Line((50, 0), (49.995, -0.008660254))
            ThreePointArc((49.995, -0.008660254), (49.875, -0.01), (49.75, -0.01))
            Line((49.75, -0.01), (49.74, 0))
            Line((49.74, 0), (49.74, 0.433012702))
            Line((49.74, 0.433012702), (49.75, 0.433012702))
        make_face()
    revolve(axis=Axis((0, 1.263867923, 0), (0, -1, 0)), revolution_arc=90)

    # Sketch8 → Cut-Extrude3 (cut, up to next)
    with BuildSketch(Plane.XY, mode=Mode.PRIVATE) as cut_extrude3_sk1:
        with Locations((0, 12.5)):
            Circle(SKETCH8_R)
    cut_extrude3_tool1 = extrude(cut_extrude3_sk1.sketch, amount=-CUT_EXTRUDE3_REACH, mode=Mode.PRIVATE) & part.part
    add(cut_extrude3_tool1.solids().sort_by_distance((0, 12.5, 0))[0], mode=Mode.SUBTRACT)

    # Sketch8 → Cut-Extrude3 direction 2 (cut, up to next)
    with BuildSketch(Plane.XY, mode=Mode.PRIVATE) as cut_extrude3_direction_2_sk1:
        with Locations((0, 12.5)):
            Circle(SKETCH8_R)
    cut_extrude3_direction_2_tool1 = extrude(cut_extrude3_direction_2_sk1.sketch, amount=CUT_EXTRUDE3_DIRECTION_2_REACH, mode=Mode.PRIVATE) & part.part
    add(cut_extrude3_direction_2_tool1.solids().sort_by_distance((0, 12.5, 0))[0], mode=Mode.SUBTRACT)


solid = part.part
